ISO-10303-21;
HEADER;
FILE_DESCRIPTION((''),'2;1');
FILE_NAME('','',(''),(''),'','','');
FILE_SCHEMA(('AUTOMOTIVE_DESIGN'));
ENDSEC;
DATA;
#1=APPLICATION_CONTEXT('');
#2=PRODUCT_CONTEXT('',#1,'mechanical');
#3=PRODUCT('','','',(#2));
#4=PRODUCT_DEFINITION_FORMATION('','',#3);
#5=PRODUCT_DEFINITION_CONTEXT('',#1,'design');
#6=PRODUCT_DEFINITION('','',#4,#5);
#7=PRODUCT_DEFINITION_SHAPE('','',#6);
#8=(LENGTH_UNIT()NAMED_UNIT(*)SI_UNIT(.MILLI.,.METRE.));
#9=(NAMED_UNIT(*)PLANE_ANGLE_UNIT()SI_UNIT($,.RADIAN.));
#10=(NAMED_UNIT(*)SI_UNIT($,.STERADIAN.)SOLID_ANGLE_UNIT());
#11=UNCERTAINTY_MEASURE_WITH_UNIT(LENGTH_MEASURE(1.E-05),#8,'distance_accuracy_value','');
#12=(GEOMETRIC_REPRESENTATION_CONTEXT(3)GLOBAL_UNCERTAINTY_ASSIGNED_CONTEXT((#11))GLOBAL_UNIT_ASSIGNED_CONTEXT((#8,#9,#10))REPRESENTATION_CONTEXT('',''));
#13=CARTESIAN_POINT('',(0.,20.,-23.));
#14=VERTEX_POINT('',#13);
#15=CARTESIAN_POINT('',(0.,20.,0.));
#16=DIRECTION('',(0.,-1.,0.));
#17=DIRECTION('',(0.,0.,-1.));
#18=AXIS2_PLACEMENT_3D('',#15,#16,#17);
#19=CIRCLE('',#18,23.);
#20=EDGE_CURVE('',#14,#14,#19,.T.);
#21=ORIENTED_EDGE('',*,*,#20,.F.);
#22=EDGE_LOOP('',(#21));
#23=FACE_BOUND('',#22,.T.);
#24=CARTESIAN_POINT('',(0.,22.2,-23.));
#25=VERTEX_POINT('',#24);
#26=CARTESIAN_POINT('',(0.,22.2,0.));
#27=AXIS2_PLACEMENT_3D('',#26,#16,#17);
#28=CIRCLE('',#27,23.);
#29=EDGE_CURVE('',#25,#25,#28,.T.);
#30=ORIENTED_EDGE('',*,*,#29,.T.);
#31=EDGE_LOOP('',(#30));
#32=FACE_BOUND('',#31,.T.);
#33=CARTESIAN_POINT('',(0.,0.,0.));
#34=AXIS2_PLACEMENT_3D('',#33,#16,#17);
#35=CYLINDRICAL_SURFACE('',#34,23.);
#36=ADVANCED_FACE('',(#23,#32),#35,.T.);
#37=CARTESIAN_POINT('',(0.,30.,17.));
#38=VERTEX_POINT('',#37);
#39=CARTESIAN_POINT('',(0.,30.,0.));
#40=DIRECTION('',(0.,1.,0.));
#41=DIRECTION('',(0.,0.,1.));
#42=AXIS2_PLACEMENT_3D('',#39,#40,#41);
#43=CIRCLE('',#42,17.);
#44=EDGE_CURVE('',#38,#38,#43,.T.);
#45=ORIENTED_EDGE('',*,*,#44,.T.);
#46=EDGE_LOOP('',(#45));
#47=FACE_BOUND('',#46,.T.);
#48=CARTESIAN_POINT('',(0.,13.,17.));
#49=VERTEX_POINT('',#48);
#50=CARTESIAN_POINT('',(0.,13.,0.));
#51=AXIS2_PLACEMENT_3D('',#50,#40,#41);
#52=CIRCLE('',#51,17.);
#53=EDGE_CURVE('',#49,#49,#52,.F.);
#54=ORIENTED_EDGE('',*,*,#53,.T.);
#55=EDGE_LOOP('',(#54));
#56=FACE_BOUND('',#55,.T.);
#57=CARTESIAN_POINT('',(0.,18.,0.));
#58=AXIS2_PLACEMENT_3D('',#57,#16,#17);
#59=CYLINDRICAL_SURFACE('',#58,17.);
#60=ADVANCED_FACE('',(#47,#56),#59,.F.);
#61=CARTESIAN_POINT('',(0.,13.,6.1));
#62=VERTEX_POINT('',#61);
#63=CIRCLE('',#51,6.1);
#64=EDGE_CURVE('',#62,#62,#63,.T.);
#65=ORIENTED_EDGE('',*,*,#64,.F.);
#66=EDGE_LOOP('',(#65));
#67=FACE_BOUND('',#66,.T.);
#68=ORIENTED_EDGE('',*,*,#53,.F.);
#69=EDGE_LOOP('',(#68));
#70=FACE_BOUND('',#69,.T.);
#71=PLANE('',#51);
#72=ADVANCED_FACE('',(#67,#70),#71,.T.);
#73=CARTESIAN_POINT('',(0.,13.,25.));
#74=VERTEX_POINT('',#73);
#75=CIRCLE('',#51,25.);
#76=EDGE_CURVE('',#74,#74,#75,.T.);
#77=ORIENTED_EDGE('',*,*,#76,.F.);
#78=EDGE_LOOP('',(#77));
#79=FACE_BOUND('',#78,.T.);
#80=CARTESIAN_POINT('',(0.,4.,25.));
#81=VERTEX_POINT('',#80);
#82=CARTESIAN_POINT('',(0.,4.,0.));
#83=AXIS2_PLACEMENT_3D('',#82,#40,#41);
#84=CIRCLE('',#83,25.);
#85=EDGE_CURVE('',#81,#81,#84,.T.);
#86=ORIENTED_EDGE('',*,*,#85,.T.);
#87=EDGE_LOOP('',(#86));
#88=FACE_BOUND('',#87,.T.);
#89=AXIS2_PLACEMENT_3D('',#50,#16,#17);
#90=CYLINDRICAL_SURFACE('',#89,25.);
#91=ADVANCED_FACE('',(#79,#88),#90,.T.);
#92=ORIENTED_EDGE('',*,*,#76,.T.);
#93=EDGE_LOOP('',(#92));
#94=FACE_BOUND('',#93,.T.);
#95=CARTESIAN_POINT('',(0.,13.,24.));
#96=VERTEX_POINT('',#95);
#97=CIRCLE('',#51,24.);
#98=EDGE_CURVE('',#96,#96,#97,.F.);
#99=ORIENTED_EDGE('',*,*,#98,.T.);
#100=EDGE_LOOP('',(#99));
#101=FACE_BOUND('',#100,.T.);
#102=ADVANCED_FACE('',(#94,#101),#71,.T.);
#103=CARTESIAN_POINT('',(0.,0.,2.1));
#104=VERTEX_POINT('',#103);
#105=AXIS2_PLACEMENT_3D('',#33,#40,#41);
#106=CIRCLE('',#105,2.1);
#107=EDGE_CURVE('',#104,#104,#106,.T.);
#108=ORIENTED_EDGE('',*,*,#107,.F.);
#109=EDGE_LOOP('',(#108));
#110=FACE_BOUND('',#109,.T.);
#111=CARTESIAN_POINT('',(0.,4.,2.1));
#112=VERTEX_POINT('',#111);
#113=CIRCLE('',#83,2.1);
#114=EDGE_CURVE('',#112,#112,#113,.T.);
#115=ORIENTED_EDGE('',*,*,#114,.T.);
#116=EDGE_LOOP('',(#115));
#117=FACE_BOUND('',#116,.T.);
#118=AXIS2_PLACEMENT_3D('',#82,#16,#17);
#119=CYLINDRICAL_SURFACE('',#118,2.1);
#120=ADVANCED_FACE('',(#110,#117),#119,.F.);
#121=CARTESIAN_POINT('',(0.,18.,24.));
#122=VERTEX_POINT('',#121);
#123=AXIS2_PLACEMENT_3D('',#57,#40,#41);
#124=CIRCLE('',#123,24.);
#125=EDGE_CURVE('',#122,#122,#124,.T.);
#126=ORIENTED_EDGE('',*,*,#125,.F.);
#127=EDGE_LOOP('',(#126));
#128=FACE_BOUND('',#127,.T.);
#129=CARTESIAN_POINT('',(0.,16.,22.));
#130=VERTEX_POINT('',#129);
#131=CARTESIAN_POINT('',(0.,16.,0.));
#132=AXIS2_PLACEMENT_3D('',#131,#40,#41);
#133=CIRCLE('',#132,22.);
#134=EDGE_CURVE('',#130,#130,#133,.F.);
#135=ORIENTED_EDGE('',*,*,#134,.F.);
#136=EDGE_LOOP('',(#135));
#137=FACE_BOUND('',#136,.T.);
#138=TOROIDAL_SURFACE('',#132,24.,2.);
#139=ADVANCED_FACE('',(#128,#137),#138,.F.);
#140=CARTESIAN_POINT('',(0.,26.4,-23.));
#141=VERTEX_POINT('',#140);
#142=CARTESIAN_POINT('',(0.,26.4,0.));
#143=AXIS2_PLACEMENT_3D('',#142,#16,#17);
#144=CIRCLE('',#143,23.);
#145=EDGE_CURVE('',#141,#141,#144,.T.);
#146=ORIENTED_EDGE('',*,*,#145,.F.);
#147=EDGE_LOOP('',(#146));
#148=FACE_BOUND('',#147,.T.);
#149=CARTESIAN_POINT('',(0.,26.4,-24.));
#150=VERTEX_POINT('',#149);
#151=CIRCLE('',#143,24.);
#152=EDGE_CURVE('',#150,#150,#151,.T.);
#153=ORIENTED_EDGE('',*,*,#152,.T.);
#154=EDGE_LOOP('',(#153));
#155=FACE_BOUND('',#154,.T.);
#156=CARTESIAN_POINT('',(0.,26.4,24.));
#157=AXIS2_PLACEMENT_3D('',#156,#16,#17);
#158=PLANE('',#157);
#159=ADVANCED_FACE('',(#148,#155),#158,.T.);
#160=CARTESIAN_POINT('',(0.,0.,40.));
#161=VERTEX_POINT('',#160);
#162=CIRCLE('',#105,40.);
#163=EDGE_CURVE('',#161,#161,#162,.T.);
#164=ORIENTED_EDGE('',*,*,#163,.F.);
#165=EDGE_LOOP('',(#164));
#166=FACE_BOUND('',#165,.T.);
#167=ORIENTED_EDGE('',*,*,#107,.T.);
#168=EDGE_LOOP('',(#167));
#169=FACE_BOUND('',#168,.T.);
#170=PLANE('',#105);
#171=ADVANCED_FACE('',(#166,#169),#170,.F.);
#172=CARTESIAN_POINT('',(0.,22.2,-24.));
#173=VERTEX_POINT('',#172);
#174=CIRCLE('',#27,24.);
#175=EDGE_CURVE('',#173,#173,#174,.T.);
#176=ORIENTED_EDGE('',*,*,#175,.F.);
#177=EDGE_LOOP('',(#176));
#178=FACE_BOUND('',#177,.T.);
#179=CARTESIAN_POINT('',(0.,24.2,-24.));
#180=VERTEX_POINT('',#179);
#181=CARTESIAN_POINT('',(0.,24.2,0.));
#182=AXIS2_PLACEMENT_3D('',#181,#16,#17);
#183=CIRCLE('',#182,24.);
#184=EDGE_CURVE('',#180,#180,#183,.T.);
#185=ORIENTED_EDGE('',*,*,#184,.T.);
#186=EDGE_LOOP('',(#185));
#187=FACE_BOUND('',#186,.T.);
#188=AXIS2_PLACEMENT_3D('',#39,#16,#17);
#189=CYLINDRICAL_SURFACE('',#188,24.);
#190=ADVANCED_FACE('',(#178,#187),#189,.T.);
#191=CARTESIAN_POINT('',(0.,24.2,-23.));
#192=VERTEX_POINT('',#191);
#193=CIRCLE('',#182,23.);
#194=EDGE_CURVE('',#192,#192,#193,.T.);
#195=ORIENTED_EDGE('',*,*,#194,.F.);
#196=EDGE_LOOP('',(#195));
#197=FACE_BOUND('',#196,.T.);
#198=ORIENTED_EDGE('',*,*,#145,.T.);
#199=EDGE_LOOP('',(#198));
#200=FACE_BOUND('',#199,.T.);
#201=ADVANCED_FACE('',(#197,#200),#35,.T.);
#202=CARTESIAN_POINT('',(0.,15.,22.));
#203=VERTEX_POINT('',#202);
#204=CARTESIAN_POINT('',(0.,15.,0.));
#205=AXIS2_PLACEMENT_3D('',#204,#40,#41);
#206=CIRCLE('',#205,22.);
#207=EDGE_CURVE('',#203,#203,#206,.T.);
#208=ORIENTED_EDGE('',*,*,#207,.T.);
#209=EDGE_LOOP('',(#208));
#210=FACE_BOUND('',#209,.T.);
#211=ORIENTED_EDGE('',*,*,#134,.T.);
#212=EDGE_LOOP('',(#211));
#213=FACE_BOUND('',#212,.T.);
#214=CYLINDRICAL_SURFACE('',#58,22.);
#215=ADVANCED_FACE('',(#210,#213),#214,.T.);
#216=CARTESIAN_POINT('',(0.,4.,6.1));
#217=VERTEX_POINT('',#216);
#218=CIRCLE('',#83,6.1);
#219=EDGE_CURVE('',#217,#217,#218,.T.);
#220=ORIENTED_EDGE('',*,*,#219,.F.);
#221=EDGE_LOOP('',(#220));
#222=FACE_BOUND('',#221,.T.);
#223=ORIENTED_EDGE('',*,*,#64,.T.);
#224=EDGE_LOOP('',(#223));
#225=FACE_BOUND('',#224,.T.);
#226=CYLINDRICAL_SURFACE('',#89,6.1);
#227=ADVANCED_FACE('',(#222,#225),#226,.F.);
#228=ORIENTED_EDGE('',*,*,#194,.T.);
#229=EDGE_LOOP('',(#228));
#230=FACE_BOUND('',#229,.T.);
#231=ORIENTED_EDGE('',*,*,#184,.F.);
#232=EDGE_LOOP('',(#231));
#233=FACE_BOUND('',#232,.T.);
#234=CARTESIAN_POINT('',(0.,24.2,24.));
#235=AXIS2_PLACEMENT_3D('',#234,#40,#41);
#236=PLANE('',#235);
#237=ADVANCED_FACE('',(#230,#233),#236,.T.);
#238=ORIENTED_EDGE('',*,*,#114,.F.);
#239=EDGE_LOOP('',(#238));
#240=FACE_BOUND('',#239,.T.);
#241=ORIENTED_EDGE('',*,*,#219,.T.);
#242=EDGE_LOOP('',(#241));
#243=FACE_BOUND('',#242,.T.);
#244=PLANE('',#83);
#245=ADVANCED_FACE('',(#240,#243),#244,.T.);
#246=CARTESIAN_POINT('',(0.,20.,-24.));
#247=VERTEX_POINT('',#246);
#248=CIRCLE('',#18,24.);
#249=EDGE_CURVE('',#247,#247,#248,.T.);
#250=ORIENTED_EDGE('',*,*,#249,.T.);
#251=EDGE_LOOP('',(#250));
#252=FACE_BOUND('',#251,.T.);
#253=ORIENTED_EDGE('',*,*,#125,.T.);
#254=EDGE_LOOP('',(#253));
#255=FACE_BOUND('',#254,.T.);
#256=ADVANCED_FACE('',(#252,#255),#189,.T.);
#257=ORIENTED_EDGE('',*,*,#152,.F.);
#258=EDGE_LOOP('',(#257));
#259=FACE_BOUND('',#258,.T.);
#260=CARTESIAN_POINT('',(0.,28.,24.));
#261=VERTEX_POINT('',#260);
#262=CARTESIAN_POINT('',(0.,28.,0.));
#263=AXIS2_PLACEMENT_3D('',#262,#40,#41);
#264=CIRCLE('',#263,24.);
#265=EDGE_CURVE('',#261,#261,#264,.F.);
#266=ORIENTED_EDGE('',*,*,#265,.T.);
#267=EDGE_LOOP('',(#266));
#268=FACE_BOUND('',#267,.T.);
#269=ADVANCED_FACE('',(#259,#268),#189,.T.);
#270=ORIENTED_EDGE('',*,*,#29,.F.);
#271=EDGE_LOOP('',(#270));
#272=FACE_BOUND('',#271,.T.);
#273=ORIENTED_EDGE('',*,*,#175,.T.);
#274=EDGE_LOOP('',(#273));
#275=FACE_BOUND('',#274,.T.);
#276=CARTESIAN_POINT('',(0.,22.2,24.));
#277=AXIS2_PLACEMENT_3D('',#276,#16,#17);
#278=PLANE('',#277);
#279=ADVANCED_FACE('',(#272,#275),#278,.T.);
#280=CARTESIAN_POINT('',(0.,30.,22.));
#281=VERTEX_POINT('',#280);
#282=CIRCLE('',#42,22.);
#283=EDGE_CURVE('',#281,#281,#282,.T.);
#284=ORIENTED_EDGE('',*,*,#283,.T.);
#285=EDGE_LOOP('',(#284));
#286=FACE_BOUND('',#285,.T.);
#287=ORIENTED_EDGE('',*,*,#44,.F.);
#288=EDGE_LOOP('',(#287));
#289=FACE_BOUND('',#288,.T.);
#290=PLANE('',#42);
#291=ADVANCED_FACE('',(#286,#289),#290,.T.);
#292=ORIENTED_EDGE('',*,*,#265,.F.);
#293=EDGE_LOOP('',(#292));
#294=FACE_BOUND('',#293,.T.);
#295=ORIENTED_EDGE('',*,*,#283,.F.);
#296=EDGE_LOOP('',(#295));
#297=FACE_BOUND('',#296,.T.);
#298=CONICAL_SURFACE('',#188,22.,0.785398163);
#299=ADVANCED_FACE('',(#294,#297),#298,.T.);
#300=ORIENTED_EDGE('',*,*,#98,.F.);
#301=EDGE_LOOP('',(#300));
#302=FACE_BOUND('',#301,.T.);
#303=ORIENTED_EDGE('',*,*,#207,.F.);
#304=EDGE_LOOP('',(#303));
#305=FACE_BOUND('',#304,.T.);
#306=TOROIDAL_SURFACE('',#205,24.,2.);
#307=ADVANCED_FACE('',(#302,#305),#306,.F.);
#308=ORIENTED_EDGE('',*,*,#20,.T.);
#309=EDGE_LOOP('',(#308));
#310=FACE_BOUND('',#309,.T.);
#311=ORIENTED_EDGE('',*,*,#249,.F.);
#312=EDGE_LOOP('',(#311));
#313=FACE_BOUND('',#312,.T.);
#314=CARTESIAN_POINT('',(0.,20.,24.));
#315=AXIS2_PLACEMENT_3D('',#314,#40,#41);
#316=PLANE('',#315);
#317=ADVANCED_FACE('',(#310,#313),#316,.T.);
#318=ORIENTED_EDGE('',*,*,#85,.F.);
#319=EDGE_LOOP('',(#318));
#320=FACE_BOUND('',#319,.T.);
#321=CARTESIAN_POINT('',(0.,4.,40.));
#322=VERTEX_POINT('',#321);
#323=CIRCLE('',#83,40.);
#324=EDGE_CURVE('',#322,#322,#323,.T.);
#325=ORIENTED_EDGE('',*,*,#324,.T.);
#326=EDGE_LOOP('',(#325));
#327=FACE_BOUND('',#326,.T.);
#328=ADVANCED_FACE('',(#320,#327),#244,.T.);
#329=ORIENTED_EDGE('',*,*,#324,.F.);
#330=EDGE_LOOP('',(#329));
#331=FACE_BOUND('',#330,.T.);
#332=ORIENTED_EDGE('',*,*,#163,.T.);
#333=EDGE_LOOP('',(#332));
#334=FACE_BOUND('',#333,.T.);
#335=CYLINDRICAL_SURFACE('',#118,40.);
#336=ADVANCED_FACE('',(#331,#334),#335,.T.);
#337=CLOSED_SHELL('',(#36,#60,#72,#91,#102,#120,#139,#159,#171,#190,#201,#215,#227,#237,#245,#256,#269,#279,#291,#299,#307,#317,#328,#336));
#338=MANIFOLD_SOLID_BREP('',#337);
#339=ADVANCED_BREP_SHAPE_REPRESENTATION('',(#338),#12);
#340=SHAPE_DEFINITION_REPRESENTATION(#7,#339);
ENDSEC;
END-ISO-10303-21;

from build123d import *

# Parameters (mm, degrees)
SKETCH1_R           = 40
SKETCH1_R_2         = 2.1
BOSS_EXTRUDE1_DEPTH = 4
SKETCH2_R           = 25
SKETCH2_R_2         = 6.1
BOSS_EXTRUDE5_DEPTH = 9
SKETCH6_R           = 22
SKETCH6_R_2         = 17
BOSS_EXTRUDE6_DEPTH = 5
SKETCH7_R           = 24
SKETCH7_R_2         = 17
BOSS_EXTRUDE7_DEPTH = 12
SKETCH9_W           = 1
SKETCH9_H           = 2.2
CHAMFER1_SIZE       = 2
FILLET1_R           = 2


with BuildPart() as part:
    # Sketch1 → Boss-Extrude1 (new body)
    with BuildSketch(Plane(origin=(0, 0, 0), x_dir=(1, 0, 0), z_dir=(0, 1, 0))):
        with Locations(Location((0, 0, 0), (0, 0, 270))):
            Circle(SKETCH1_R)
        with Locations(Location((0, 0, 0), (0, 0, 270))):
            Circle(SKETCH1_R_2, mode=Mode.SUBTRACT)
    extrude(amount=BOSS_EXTRUDE1_DEPTH)

    # Sketch2 → Boss-Extrude5 (add)
    with BuildSketch(Plane(origin=(0, 4, 0), x_dir=(1, 0, 0), z_dir=(0, 1, 0))):
        with Locations(Location((0, 0, 0), (0, 0, 270))):
            Circle(SKETCH2_R)
        with Locations(Location((0, 0, 0), (0, 0, 270))):
            Circle(SKETCH2_R_2, mode=Mode.SUBTRACT)
    extrude(amount=BOSS_EXTRUDE5_DEPTH)

    # Sketch6 → Boss-Extrude6 (add)
    with BuildSketch(Plane(origin=(0, 13, 0), x_dir=(1, 0, 0), z_dir=(0, 1, 0))):
        with Locations(Location((0, 0, 0), (0, 0, 270))):
            Circle(SKETCH6_R)
        with Locations(Location((0, 0, 0), (0, 0, 270))):
            Circle(SKETCH6_R_2, mode=Mode.SUBTRACT)
    extrude(amount=BOSS_EXTRUDE6_DEPTH)

    # Sketch7 → Boss-Extrude7 (add)
    with BuildSketch(Plane(origin=(0, 18, 0), x_dir=(1, 0, 0), z_dir=(0, 1, 0))):
        with Locations(Location((0, 0, 0), (0, 0, 270))):
            Circle(SKETCH7_R)
        with Locations(Location((0, 0, 0), (0, 0, 270))):
            Circle(SKETCH7_R_2, mode=Mode.SUBTRACT)
    extrude(amount=BOSS_EXTRUDE7_DEPTH)

    # Sketch9 → Cut-Revolve1 (revolve, cut)
    with BuildSketch(Plane(origin=(0, 0, 0), x_dir=(0, 0, -1), z_dir=(1, 0, 0)), mode=Mode.PRIVATE) as cut_revolve1_sk:
        with Locations((-23.5, 25.3)):
            Rectangle(SKETCH9_W, SKETCH9_H)
        with Locations((-23.5, 21.1)):
            Rectangle(SKETCH9_W, SKETCH9_H)
    revolve(cut_revolve1_sk.sketch.rotate(Axis((0, 0, 0), (0, 1, 0)), 180), axis=Axis((0, 0, 0), (0, 1, 0)), mode=Mode.SUBTRACT)

    # Chamfer1
    chamfer1_edges = [part.edges().sort_by_distance(p)[0] for p in [
        (0, 30, -24),
    ]]
    chamfer(chamfer1_edges, length=CHAMFER1_SIZE)

    # Fillet1
    fillet1_edges = [part.edges().sort_by_distance(p)[0] for p in [
        (0, 18, -22),
        (0, 13, -22),
    ]]
    fillet(fillet1_edges, radius=FILLET1_R - 0.0001)  # a hair under: the kernel refuses the full size


solid = part.part
